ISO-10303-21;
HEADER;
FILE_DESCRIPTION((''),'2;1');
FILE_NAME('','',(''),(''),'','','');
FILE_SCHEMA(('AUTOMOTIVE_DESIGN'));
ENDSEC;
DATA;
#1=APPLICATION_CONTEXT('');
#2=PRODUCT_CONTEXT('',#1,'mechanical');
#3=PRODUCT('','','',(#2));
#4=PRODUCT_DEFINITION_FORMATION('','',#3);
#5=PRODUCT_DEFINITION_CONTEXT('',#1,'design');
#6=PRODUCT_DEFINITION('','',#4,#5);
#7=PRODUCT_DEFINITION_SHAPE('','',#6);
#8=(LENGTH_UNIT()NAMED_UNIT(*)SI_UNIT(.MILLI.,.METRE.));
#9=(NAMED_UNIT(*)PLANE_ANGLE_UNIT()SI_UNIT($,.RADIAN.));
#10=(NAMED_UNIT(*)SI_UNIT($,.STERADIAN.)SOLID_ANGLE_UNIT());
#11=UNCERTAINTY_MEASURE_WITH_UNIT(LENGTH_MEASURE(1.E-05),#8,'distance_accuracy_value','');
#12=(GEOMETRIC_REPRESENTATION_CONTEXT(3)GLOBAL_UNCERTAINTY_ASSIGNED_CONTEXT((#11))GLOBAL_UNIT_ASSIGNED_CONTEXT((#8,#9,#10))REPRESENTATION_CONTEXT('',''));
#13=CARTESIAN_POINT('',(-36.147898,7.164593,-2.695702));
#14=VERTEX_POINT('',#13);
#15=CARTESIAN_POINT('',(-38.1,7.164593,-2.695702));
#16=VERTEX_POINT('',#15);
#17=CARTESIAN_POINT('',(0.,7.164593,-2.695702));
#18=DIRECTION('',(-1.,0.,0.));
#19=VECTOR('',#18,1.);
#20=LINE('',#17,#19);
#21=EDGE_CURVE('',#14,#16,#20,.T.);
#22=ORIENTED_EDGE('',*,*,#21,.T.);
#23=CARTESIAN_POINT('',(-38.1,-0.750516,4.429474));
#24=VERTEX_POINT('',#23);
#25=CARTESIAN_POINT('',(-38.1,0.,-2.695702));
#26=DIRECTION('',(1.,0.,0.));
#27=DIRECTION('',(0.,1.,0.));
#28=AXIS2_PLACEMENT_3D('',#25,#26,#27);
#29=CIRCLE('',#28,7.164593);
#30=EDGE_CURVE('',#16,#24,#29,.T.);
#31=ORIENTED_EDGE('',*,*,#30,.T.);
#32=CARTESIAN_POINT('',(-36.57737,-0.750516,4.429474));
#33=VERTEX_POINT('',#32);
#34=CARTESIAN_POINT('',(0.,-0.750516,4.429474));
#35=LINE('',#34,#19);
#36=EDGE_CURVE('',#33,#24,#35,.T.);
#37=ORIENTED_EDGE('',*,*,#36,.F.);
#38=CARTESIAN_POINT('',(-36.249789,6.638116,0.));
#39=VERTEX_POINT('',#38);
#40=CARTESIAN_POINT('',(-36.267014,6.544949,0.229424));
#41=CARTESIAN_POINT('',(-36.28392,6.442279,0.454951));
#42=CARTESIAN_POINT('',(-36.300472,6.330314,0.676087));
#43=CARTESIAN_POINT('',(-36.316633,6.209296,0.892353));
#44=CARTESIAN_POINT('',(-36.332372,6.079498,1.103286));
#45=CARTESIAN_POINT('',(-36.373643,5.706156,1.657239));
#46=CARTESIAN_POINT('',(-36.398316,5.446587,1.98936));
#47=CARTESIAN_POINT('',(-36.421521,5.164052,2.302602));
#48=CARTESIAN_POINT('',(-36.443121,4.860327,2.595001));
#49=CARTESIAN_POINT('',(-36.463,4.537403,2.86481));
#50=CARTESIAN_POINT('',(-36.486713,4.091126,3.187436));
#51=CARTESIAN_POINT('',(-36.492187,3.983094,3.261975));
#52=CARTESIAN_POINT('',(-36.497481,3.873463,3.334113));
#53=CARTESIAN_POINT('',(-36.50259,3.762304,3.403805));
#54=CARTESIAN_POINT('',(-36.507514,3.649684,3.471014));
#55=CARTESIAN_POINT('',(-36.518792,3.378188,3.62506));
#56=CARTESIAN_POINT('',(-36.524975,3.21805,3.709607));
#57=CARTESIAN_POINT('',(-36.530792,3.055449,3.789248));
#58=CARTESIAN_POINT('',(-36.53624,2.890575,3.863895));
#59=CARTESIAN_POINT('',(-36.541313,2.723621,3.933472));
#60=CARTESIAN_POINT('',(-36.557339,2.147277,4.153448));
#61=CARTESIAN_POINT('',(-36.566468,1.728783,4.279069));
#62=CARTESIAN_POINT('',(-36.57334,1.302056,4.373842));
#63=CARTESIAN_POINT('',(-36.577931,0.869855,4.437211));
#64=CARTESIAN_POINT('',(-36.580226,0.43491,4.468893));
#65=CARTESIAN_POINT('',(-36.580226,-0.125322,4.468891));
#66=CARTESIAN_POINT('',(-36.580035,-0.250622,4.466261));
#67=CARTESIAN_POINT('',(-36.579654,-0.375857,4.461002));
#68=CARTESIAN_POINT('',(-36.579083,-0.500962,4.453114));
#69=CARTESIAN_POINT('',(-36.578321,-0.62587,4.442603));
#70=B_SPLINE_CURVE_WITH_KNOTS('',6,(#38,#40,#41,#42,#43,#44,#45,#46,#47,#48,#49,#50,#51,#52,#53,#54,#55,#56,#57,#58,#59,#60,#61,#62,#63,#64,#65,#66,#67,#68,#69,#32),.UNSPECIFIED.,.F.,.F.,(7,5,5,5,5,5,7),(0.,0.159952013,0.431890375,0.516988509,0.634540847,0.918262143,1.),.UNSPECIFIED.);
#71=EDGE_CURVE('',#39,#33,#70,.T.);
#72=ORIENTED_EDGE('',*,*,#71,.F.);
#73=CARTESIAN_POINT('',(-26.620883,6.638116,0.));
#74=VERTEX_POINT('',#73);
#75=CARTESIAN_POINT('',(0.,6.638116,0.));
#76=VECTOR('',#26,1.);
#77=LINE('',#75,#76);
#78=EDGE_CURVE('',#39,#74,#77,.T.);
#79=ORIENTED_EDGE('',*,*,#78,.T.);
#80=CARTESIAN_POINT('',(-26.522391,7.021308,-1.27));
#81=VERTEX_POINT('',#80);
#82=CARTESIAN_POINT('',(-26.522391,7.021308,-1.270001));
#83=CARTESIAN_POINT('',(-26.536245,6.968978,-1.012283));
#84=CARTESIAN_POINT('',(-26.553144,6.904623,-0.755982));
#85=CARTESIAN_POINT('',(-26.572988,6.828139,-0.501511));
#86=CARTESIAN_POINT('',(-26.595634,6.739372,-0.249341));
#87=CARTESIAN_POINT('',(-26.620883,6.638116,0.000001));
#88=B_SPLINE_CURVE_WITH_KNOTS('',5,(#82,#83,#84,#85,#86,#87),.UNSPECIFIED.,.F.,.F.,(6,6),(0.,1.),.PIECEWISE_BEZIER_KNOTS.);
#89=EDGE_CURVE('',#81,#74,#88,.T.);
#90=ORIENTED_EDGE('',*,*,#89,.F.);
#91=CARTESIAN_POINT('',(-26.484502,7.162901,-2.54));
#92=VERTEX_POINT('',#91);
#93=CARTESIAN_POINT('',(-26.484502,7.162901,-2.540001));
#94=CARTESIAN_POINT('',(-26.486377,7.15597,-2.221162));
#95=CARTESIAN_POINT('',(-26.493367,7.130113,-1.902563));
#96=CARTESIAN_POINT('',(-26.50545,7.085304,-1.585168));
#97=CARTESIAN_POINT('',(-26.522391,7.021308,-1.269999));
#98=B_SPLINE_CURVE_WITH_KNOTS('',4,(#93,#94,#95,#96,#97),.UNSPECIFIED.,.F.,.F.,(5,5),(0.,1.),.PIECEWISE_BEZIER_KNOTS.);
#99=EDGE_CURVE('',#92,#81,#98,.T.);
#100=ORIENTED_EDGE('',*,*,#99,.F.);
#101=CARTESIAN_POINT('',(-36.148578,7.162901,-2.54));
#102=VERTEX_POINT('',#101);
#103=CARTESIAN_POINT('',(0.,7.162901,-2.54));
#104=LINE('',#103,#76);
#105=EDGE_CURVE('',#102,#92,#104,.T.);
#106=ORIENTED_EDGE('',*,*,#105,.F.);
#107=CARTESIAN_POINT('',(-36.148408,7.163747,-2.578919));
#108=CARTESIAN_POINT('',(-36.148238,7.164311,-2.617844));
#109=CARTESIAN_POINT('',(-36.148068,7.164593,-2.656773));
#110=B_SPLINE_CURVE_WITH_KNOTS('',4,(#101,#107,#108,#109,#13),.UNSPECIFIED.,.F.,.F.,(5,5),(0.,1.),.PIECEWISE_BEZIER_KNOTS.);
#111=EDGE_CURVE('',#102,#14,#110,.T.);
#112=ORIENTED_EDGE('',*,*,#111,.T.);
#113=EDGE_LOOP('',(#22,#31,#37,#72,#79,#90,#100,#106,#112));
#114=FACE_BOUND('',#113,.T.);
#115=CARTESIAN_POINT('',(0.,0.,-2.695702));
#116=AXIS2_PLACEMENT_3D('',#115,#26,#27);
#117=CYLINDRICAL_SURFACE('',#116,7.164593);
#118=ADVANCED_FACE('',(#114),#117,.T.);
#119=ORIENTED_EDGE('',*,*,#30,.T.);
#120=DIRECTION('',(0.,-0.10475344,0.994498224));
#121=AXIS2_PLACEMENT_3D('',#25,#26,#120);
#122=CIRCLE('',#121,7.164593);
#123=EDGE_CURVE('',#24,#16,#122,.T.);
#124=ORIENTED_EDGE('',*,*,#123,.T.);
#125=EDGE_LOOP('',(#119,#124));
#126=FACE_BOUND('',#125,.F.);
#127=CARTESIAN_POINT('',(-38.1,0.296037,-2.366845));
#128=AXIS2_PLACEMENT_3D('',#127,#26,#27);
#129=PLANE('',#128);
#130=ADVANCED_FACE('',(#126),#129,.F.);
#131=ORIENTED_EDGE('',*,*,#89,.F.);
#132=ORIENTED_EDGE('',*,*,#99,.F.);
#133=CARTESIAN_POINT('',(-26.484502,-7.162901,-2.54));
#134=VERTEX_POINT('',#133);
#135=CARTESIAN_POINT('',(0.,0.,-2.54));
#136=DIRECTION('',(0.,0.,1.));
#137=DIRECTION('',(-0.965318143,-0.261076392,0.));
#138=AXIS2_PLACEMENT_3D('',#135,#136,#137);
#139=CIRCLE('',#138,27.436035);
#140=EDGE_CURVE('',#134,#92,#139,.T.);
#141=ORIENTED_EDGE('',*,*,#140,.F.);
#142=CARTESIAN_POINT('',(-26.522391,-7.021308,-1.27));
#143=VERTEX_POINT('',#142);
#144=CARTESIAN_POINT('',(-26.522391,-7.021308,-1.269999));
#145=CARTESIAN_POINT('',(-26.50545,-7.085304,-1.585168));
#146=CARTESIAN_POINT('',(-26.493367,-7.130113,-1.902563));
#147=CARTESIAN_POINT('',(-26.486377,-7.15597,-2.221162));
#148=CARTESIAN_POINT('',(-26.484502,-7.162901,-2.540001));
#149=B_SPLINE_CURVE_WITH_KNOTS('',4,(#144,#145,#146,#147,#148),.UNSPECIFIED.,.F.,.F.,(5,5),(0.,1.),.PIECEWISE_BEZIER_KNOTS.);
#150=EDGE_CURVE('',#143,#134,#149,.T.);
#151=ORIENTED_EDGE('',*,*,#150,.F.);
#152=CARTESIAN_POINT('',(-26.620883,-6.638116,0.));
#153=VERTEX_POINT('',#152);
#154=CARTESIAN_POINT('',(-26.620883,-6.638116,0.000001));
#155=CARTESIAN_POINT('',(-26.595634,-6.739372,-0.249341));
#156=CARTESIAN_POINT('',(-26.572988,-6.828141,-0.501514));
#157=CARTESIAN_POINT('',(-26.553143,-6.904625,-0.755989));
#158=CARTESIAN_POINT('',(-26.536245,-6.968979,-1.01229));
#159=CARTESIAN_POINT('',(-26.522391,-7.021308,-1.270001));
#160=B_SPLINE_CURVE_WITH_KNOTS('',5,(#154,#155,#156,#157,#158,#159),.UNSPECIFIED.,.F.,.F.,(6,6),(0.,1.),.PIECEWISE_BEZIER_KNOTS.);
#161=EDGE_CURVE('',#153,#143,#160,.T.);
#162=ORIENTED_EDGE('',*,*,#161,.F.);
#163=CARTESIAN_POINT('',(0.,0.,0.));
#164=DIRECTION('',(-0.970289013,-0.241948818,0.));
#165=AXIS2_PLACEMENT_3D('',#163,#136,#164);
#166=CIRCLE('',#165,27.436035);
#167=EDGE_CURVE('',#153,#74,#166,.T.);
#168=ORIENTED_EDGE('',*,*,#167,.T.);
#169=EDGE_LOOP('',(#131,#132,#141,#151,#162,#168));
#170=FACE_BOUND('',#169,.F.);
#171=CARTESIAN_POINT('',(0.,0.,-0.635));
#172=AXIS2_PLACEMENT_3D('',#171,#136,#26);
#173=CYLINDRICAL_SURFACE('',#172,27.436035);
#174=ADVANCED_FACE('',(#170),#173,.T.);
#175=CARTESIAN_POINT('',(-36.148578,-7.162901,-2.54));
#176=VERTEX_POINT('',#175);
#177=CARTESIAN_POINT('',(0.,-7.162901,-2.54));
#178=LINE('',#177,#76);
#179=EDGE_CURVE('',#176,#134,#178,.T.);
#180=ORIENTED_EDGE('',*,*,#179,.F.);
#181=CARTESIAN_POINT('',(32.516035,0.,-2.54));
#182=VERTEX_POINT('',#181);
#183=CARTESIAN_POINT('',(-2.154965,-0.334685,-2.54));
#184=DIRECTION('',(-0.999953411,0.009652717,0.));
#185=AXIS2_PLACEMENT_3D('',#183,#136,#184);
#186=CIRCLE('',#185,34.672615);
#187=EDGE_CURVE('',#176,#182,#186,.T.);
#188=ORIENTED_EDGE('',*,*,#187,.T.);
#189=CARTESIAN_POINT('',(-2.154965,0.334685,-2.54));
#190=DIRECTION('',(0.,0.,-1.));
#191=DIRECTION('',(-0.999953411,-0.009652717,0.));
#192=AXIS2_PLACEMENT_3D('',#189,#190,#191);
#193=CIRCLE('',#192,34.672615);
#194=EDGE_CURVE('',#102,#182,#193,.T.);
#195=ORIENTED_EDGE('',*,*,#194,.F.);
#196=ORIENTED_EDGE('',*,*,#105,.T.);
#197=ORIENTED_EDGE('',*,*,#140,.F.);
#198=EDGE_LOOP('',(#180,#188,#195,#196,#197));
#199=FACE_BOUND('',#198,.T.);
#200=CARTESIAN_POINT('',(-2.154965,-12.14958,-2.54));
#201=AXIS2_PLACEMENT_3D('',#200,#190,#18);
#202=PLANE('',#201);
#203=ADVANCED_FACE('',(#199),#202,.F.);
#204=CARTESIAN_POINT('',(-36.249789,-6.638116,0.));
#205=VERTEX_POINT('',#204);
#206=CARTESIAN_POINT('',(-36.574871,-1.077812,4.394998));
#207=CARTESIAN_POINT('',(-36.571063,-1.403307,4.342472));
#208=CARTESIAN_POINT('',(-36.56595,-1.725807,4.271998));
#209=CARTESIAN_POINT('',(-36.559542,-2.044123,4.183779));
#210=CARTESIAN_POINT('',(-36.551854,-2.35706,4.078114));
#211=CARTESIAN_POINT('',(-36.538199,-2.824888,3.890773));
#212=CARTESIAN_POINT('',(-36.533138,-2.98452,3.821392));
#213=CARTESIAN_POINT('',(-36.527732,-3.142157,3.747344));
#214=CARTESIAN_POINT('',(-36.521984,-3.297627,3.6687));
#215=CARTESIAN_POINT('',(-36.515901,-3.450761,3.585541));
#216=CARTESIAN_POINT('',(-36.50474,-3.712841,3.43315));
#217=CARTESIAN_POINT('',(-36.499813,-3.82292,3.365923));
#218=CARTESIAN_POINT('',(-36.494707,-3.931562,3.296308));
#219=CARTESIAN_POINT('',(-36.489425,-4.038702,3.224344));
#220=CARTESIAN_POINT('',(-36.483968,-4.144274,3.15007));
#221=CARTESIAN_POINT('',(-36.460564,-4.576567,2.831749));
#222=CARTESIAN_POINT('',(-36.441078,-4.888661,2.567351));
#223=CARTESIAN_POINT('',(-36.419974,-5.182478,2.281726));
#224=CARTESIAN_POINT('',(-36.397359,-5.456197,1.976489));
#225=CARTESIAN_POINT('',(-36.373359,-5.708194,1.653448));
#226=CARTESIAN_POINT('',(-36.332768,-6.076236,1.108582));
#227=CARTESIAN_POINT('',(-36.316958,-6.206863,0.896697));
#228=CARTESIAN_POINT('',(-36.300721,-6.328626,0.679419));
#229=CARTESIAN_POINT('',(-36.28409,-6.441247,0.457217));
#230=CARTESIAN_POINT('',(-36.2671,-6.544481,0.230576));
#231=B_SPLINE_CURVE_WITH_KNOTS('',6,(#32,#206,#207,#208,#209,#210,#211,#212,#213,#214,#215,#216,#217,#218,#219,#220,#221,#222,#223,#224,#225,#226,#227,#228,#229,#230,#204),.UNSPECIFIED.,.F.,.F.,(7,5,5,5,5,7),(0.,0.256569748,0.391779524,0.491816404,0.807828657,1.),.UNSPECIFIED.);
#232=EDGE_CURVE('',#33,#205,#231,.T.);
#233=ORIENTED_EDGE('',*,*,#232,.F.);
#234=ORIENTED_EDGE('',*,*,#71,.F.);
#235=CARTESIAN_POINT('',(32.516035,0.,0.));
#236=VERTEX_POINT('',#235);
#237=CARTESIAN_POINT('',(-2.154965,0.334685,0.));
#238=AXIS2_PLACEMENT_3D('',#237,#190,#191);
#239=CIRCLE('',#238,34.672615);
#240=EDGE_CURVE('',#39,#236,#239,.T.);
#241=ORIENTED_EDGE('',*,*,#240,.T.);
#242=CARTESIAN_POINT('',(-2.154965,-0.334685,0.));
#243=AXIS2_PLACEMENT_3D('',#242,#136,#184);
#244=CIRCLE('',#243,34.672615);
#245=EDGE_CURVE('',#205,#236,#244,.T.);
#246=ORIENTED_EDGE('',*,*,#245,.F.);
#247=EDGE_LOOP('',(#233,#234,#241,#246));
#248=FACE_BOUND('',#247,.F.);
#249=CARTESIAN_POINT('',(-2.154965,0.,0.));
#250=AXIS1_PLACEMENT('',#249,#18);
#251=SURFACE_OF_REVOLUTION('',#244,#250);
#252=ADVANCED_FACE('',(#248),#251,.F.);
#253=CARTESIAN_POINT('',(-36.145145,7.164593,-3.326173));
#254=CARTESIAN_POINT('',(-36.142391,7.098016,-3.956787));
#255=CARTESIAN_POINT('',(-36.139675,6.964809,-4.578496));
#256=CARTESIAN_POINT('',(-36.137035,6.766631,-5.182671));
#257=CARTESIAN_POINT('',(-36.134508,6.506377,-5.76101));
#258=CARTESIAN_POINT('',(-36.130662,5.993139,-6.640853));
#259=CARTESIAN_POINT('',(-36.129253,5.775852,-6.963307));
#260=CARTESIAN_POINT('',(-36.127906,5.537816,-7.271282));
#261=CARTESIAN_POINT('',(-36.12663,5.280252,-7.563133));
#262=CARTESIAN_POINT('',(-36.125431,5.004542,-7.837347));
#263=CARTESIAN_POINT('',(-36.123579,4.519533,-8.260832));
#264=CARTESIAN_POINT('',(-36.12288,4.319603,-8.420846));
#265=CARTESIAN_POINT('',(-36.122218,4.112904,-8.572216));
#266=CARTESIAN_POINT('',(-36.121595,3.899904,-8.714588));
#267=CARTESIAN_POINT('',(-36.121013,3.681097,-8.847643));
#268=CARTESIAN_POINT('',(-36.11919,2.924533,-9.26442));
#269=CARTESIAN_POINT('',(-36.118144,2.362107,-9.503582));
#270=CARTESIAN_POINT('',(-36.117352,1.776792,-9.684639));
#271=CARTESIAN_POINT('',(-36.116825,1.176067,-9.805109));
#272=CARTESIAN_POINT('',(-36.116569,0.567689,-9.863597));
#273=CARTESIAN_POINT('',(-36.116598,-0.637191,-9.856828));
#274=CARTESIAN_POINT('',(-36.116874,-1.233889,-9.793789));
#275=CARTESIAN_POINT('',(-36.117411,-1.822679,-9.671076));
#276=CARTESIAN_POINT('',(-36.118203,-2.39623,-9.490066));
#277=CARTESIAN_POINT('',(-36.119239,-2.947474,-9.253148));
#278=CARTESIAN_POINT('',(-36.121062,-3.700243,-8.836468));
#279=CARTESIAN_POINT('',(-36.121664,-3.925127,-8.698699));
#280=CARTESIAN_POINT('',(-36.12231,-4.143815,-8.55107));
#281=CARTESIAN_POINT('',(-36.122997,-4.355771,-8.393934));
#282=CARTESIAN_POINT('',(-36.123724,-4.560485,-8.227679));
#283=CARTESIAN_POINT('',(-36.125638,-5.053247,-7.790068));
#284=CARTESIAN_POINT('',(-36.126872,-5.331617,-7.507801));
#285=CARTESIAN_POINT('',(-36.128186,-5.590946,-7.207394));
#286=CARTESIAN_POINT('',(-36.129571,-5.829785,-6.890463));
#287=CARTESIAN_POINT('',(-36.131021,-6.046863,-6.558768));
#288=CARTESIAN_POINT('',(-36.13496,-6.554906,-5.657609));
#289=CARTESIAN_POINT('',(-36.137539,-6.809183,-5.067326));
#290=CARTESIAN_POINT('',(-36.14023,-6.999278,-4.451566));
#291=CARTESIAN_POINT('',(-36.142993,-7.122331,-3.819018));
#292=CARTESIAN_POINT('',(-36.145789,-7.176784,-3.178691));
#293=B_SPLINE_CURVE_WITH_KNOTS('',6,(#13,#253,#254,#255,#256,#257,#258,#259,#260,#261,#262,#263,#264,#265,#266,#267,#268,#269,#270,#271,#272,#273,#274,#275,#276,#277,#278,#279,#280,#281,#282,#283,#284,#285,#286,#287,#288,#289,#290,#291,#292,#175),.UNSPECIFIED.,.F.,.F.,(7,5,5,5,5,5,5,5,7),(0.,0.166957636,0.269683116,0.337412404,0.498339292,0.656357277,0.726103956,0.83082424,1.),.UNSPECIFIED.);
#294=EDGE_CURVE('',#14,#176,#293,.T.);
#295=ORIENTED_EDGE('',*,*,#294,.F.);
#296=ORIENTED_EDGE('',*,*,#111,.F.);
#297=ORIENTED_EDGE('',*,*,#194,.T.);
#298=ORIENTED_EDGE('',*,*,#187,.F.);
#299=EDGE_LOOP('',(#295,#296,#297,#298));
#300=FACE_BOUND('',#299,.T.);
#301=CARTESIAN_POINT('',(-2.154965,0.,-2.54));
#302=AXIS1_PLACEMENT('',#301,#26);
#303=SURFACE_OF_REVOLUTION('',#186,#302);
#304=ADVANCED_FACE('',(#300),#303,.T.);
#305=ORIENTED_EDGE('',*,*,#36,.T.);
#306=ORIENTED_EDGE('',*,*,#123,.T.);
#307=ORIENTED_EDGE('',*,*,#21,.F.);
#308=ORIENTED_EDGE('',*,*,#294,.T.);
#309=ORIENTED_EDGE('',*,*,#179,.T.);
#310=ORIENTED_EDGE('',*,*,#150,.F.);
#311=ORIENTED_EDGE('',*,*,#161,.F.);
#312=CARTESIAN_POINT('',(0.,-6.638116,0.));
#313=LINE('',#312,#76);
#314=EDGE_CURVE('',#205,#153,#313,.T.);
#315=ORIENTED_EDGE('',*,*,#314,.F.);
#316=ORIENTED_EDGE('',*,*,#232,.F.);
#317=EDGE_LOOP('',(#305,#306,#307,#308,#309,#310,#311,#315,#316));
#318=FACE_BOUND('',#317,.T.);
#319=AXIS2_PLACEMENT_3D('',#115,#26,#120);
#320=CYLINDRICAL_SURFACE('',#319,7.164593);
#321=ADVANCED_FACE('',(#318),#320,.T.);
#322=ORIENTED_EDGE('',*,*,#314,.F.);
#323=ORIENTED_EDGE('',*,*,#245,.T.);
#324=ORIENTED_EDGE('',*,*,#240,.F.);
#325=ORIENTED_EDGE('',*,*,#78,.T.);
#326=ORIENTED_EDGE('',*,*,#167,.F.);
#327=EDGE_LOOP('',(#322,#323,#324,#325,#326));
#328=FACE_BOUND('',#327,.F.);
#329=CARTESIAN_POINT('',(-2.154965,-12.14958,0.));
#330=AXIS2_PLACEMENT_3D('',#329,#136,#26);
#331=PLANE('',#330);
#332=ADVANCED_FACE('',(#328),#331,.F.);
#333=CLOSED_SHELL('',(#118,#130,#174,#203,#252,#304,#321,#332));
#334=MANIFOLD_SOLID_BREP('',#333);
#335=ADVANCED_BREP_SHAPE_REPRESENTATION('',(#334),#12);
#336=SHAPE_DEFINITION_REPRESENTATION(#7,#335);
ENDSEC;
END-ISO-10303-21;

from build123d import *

# Parameters (mm, degrees)
F1_ANGLE = 180
F2_W     = 27.4360350213
F2_H     = 1.27
F8_DEPTH = 38.1


# Not quite as in the source:
# - the program builds the solid bodies; features that only make, move or delete a surface that nothing else refers to are left out


with BuildPart() as f1:
    # F0 (on Top) → F1 (revolve)
    with BuildSketch(Plane.XY):
        with BuildLine():
            Line((32.5160350213, 0), (-36.8259649787, 0))
            ThreePointArc((-36.8259649787, 0), (-2.1549649787, -35.0073002846), (32.5160350213, 0))
        make_face()
    revolve(axis=Axis((-2.1549649787, 0, 0), (-1, 0, 0)), revolution_arc=F1_ANGLE)

    # F2 (on Front) → F3 (revolve)
    with BuildSketch(Plane.XZ):
        with Locations((13.7180175106, -0.635)):
            Rectangle(F2_W, F2_H)
    revolve(axis=Axis((0, 0, -0.635), (0, 0, -1)))

    # F4: F1 across face


with BuildPart() as f1_1:
    add(f1.part)
    add(f1.part.mirror(Plane(origin=(0, 0, -1.27), x_dir=(1, 0, 0), z_dir=(0, 0, -1))))

    # F7 (on Right) → F8 (join)
    with BuildSketch(Plane.YZ):
        with BuildLine():
            ThreePointArc((-0.7505157715, 4.4294735411), (-4.7934462503, -8.0205740429), (7.1645930807, -2.6957015507))
            ThreePointArc((7.1645930807, -2.6957015507), (4.7934462503, 2.6291709415), (-0.7505157715, 4.4294735411))
        make_face()
    extrude(amount=-F8_DEPTH)


solid = f1_1.part
